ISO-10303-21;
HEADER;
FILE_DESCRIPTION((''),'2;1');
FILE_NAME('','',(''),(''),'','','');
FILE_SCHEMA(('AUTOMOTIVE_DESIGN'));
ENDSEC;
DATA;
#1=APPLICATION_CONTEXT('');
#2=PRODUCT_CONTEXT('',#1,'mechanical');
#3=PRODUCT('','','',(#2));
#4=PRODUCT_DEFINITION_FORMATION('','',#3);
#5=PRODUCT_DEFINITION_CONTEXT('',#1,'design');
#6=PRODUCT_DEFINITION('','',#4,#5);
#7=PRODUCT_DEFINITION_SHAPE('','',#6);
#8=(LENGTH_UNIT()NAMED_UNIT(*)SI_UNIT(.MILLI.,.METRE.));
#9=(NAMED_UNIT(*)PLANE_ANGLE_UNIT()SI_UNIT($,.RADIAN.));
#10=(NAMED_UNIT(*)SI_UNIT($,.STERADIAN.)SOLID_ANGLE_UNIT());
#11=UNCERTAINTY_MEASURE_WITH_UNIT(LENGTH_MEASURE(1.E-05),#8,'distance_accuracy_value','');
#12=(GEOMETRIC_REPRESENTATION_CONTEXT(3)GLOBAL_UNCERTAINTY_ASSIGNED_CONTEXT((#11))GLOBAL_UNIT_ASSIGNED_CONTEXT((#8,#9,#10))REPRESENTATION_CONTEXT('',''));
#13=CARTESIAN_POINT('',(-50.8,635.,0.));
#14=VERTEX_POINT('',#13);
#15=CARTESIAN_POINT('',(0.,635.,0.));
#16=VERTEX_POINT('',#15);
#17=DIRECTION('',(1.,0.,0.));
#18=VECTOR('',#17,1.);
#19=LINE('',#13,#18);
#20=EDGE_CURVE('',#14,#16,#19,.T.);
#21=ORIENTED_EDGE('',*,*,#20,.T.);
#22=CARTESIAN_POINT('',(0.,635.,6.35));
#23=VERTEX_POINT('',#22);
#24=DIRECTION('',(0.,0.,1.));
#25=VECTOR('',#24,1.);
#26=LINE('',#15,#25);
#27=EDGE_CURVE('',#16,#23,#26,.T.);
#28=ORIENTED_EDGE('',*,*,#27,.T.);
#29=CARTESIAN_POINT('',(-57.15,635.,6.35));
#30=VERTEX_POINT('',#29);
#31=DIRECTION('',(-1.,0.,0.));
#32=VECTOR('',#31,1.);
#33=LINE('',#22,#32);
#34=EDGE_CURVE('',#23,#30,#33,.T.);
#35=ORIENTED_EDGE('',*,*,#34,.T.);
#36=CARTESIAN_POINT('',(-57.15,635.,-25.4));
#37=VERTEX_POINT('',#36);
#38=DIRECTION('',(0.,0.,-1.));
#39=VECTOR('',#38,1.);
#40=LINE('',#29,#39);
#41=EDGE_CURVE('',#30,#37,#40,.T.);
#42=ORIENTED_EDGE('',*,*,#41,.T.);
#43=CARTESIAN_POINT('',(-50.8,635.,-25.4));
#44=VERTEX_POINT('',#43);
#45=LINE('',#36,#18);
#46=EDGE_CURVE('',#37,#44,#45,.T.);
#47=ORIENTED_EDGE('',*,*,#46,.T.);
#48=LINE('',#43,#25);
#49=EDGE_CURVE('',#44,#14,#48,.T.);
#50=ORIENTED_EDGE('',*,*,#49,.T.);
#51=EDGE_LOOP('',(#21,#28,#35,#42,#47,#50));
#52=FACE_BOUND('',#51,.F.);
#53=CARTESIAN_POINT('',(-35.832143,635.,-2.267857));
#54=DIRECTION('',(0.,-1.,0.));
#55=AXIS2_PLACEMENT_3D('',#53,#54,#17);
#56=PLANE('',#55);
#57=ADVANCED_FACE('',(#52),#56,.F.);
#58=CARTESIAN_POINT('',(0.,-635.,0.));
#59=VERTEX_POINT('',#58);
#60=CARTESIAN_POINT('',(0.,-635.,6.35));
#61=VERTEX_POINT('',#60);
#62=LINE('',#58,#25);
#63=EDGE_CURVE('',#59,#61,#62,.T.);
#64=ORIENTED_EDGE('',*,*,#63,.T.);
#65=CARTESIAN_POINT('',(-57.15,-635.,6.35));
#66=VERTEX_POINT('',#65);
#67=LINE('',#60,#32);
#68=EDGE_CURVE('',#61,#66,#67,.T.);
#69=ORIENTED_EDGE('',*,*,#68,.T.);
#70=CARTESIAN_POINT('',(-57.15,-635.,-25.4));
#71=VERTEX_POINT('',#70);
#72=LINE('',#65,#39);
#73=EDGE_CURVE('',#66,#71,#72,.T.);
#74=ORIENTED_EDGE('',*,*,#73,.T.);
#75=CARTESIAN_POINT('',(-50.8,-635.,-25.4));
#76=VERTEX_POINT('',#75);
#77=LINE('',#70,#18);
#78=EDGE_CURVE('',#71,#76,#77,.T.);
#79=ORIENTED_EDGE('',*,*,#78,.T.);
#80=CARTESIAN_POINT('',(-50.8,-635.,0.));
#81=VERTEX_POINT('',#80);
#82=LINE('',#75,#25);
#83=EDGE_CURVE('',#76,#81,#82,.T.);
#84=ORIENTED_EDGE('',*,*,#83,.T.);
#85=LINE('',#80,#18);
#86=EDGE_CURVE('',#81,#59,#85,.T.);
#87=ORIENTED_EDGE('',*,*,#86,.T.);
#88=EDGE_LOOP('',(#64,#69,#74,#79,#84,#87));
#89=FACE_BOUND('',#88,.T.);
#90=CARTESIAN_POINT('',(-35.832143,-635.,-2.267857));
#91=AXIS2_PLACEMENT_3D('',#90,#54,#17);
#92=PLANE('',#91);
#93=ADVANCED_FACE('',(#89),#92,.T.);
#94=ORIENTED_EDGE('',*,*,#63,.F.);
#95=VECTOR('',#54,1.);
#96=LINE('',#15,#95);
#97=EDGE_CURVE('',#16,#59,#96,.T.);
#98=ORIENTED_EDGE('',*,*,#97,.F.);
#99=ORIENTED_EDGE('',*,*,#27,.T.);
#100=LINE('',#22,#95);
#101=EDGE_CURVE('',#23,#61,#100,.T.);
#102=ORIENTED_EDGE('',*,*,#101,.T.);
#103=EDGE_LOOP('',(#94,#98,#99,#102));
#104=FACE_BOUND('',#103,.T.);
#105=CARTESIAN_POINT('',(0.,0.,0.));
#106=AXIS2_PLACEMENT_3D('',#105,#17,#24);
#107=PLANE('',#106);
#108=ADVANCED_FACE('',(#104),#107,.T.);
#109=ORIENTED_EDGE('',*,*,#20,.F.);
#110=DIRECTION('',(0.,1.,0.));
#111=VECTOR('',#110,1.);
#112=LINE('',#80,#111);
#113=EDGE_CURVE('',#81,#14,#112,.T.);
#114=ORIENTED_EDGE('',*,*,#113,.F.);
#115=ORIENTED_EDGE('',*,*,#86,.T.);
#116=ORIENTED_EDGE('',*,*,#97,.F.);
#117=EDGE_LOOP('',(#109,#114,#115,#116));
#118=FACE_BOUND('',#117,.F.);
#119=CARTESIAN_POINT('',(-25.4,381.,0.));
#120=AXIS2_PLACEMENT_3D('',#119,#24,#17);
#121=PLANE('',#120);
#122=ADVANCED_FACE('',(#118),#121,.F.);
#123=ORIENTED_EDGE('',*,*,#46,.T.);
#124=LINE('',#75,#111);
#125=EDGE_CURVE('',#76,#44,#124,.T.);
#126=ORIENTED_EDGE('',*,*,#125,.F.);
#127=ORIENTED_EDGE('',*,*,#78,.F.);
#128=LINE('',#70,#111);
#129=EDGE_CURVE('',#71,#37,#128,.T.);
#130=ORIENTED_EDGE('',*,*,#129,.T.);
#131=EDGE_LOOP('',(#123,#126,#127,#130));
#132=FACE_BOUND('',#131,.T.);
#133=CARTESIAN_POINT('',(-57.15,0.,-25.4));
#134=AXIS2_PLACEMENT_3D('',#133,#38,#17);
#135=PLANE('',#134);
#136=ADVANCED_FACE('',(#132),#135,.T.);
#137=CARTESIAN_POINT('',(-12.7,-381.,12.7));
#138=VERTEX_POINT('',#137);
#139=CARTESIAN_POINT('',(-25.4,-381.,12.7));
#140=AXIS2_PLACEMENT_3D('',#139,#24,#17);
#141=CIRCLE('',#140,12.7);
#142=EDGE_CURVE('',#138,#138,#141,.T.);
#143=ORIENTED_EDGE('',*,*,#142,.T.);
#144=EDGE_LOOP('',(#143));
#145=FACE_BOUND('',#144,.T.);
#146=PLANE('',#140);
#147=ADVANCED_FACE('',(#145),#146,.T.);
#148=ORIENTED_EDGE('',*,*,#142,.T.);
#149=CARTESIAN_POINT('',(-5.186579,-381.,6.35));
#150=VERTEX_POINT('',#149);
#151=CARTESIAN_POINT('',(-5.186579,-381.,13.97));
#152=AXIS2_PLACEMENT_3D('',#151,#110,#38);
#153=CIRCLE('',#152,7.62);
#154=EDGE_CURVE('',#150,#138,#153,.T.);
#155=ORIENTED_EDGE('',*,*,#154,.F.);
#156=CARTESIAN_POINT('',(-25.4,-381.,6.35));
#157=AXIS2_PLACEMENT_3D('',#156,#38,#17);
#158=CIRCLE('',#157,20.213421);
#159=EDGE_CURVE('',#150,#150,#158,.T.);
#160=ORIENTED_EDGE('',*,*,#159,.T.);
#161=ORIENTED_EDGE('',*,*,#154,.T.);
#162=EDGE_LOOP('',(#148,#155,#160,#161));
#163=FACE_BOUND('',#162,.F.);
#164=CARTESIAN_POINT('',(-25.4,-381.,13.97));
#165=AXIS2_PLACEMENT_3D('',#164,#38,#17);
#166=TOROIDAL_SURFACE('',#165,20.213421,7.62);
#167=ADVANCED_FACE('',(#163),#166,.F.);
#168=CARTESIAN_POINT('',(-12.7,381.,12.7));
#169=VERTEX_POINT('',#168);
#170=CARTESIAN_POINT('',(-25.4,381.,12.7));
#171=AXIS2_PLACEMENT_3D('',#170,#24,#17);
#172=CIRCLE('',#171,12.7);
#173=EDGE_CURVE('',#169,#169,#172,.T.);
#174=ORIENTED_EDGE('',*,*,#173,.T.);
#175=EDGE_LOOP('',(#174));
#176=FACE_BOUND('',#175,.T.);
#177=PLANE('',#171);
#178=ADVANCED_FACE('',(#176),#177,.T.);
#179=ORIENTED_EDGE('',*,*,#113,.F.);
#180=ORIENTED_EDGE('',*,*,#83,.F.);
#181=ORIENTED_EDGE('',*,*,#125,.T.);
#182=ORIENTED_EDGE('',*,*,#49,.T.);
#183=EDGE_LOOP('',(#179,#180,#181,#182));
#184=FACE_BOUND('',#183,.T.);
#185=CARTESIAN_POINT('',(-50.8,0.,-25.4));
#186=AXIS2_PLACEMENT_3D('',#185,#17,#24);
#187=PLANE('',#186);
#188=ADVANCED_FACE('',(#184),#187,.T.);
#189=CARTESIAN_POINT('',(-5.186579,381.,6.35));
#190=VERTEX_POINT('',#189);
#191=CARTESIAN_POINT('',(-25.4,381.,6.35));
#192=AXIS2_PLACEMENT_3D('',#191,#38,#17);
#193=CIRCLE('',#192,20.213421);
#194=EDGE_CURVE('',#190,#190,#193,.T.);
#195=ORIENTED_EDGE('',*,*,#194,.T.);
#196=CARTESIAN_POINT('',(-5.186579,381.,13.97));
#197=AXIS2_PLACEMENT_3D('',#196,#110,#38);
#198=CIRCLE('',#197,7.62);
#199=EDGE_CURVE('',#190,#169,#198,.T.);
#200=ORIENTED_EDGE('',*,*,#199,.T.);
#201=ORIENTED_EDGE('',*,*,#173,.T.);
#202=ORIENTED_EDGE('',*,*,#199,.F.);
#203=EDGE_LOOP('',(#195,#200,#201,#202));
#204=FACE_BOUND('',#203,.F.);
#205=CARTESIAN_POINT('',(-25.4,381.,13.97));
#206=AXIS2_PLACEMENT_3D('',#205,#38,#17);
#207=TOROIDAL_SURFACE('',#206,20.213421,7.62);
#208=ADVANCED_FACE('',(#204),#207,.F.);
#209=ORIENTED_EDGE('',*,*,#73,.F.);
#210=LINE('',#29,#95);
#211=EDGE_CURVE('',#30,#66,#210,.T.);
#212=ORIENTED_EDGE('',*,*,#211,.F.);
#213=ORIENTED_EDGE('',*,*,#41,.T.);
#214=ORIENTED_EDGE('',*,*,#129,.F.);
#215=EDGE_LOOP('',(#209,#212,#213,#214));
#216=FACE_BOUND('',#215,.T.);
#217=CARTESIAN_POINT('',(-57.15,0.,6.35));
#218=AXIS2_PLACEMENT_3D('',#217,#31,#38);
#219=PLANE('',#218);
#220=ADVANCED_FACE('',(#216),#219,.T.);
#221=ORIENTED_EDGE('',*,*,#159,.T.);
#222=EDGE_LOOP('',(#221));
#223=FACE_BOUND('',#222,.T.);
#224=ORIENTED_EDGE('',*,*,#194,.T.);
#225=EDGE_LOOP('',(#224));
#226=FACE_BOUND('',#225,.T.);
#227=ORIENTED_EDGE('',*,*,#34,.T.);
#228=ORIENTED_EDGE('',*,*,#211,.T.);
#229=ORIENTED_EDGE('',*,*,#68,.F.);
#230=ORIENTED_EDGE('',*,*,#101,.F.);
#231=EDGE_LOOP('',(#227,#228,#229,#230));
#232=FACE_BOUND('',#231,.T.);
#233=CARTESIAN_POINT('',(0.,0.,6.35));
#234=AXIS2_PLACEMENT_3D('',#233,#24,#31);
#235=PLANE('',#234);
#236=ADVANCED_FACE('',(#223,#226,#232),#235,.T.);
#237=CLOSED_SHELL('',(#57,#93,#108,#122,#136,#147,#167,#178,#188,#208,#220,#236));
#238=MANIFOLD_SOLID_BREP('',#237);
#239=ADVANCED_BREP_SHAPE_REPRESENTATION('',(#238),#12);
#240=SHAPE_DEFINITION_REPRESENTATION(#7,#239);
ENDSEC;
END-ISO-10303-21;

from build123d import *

# Parameters (mm, degrees)
F1_DEPTH = 635
F2_R     = 12.7
F3_DEPTH = 12.7


# Not quite as in the source:
# - a fillet or chamfer that OpenCascade refuses, or shapes differently, is made with other operations: its cross-section is extruded or revolved along the edge and cut away or added


with BuildPart() as f1:
    # F0 (on Front) → F1 (new body, symmetric)
    with BuildSketch(Plane.XZ):
        Polygon((-50.8, 0), (0, 0), (0, 6.35), (-57.15, 6.35), (-57.15, -25.4), (-50.8, -25.4), align=None)
    extrude(amount=F1_DEPTH, both=True)

    # F2 (on Top) → F3 (join)
    with BuildSketch(Plane.XY):
        with Locations((-25.4, 381)):
            Circle(F2_R)
        with Locations((-25.4, -381)):
            Circle(F2_R)
    extrude(amount=F3_DEPTH)

    # F4: fillet of radius 7.62 on 1 edges, made by hand

    # F4_s1 → F4_t2 (revolve)
    with BuildSketch(Plane.XZ.offset(-381)):
        with BuildLine():
            ThreePointArc((-5.1865786755, 6.35), (-10.1052675251, 8.1501288674), (-12.7, 12.7))
            Line((-12.7, 12.7), (-12.7, 6.35))
            Line((-12.7, 6.35), (-5.1865786755, 6.35))
        make_face()
    revolve(axis=Axis((-25.4, 381, 6.35), (0, 0, -1)))

    # F5: fillet of radius 7.62 on 1 edges, made by hand

    # F5_s1 → F5_t2 (revolve)
    with BuildSketch(Plane.XZ.offset(381)):
        with BuildLine():
            ThreePointArc((-5.1865786755, 6.35), (-10.1052675251, 8.1501288674), (-12.7, 12.7))
            Line((-12.7, 12.7), (-12.7, 6.35))
            Line((-12.7, 6.35), (-5.1865786755, 6.35))
        make_face()
    revolve(axis=Axis((-25.4, -381, 6.35), (0, 0, -1)))


solid = f1.part
